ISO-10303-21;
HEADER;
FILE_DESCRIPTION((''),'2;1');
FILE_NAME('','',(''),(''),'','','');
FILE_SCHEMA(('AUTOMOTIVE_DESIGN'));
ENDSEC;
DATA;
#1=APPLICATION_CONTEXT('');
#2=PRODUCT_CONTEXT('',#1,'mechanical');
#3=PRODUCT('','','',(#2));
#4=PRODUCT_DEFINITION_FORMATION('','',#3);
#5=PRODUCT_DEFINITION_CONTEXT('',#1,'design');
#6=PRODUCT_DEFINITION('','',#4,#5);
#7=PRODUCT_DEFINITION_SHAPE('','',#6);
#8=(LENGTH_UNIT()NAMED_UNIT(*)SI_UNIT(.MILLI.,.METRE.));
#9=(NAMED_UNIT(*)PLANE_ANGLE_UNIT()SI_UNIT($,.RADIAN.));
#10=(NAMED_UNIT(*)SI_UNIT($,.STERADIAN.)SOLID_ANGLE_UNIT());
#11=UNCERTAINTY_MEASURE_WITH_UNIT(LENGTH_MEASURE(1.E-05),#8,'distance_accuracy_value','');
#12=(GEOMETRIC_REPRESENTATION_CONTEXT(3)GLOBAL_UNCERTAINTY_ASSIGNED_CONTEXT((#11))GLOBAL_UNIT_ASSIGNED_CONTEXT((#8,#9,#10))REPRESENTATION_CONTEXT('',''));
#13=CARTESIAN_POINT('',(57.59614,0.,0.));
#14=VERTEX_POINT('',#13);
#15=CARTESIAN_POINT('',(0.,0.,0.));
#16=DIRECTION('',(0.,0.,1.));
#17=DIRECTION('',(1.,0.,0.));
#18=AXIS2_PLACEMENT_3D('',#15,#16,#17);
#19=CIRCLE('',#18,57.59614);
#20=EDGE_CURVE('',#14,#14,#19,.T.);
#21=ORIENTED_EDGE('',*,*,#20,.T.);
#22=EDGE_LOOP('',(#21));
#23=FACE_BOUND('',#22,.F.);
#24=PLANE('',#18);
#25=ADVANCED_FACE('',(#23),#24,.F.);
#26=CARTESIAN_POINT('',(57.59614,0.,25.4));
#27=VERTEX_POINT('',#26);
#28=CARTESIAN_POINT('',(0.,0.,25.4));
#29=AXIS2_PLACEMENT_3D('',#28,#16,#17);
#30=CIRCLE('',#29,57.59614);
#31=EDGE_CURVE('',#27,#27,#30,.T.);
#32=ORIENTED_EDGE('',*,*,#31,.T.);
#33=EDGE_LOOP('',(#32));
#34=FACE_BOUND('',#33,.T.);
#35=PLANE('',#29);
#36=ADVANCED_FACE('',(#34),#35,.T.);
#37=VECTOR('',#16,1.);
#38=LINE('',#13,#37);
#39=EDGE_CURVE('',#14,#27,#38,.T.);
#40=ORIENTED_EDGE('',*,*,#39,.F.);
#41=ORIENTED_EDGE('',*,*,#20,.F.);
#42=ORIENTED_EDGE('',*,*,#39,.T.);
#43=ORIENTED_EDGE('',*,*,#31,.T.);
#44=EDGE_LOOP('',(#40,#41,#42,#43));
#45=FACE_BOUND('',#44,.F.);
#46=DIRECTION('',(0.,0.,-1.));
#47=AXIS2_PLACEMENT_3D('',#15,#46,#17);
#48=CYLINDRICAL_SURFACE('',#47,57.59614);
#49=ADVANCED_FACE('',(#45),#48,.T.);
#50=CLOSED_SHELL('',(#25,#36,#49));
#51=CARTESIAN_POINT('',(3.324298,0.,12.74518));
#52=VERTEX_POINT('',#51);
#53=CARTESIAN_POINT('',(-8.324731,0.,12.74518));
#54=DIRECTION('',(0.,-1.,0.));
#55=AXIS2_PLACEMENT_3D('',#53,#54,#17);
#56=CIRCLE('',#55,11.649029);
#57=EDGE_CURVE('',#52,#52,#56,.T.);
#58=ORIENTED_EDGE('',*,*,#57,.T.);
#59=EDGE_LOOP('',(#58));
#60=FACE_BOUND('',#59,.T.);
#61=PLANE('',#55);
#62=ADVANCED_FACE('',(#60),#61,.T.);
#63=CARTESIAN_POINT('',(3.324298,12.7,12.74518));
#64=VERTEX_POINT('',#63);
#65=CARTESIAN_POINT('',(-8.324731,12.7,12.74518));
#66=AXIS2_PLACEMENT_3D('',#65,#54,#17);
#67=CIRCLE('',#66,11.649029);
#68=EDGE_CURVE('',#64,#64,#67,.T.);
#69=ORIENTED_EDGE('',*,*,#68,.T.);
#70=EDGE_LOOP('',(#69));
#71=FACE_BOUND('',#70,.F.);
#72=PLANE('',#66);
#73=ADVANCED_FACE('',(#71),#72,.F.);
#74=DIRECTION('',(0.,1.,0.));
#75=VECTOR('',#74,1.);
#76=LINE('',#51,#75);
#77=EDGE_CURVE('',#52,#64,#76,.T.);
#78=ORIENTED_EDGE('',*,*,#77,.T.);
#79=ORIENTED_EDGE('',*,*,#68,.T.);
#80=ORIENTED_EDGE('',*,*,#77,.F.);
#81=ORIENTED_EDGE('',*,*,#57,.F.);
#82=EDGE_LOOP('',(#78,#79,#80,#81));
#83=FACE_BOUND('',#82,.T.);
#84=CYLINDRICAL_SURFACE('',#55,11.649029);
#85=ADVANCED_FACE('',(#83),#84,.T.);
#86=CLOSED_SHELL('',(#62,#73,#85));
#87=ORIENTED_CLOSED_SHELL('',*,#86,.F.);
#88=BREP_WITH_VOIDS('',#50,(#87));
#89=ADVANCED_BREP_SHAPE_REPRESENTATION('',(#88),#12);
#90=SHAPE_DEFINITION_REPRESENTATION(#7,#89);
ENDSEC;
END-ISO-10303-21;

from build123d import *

# Parameters (mm, degrees)
F0_R     = 57.5961395205
F1_DEPTH = 25.4
F2_R     = 41.9082998656
F3_DEPTH = 178
F4_R     = 11.649028694
F5_DEPTH = 12.7


# Not quite as in the source:
# - an extrude ends at something that could not be found from the text; its depth is read off the source's solid


with BuildPart() as f1:
    # F0 (on Top) → F1 (new body)
    with BuildSketch(Plane.XY):
        Circle(F0_R)
    extrude(amount=F1_DEPTH)

    # F2 (on Top) → F3 (cut, through all)
    with BuildSketch(Plane.XY):
        Circle(F2_R)
    extrude(amount=-F3_DEPTH, mode=Mode.SUBTRACT)

    # F4 (on Front) → F5 (cut)
    with BuildSketch(Plane.XZ):
        with Locations((-8.324730893, 12.7451797782)):
            Circle(F4_R)
    extrude(amount=-F5_DEPTH, mode=Mode.SUBTRACT)


solid = f1.part
